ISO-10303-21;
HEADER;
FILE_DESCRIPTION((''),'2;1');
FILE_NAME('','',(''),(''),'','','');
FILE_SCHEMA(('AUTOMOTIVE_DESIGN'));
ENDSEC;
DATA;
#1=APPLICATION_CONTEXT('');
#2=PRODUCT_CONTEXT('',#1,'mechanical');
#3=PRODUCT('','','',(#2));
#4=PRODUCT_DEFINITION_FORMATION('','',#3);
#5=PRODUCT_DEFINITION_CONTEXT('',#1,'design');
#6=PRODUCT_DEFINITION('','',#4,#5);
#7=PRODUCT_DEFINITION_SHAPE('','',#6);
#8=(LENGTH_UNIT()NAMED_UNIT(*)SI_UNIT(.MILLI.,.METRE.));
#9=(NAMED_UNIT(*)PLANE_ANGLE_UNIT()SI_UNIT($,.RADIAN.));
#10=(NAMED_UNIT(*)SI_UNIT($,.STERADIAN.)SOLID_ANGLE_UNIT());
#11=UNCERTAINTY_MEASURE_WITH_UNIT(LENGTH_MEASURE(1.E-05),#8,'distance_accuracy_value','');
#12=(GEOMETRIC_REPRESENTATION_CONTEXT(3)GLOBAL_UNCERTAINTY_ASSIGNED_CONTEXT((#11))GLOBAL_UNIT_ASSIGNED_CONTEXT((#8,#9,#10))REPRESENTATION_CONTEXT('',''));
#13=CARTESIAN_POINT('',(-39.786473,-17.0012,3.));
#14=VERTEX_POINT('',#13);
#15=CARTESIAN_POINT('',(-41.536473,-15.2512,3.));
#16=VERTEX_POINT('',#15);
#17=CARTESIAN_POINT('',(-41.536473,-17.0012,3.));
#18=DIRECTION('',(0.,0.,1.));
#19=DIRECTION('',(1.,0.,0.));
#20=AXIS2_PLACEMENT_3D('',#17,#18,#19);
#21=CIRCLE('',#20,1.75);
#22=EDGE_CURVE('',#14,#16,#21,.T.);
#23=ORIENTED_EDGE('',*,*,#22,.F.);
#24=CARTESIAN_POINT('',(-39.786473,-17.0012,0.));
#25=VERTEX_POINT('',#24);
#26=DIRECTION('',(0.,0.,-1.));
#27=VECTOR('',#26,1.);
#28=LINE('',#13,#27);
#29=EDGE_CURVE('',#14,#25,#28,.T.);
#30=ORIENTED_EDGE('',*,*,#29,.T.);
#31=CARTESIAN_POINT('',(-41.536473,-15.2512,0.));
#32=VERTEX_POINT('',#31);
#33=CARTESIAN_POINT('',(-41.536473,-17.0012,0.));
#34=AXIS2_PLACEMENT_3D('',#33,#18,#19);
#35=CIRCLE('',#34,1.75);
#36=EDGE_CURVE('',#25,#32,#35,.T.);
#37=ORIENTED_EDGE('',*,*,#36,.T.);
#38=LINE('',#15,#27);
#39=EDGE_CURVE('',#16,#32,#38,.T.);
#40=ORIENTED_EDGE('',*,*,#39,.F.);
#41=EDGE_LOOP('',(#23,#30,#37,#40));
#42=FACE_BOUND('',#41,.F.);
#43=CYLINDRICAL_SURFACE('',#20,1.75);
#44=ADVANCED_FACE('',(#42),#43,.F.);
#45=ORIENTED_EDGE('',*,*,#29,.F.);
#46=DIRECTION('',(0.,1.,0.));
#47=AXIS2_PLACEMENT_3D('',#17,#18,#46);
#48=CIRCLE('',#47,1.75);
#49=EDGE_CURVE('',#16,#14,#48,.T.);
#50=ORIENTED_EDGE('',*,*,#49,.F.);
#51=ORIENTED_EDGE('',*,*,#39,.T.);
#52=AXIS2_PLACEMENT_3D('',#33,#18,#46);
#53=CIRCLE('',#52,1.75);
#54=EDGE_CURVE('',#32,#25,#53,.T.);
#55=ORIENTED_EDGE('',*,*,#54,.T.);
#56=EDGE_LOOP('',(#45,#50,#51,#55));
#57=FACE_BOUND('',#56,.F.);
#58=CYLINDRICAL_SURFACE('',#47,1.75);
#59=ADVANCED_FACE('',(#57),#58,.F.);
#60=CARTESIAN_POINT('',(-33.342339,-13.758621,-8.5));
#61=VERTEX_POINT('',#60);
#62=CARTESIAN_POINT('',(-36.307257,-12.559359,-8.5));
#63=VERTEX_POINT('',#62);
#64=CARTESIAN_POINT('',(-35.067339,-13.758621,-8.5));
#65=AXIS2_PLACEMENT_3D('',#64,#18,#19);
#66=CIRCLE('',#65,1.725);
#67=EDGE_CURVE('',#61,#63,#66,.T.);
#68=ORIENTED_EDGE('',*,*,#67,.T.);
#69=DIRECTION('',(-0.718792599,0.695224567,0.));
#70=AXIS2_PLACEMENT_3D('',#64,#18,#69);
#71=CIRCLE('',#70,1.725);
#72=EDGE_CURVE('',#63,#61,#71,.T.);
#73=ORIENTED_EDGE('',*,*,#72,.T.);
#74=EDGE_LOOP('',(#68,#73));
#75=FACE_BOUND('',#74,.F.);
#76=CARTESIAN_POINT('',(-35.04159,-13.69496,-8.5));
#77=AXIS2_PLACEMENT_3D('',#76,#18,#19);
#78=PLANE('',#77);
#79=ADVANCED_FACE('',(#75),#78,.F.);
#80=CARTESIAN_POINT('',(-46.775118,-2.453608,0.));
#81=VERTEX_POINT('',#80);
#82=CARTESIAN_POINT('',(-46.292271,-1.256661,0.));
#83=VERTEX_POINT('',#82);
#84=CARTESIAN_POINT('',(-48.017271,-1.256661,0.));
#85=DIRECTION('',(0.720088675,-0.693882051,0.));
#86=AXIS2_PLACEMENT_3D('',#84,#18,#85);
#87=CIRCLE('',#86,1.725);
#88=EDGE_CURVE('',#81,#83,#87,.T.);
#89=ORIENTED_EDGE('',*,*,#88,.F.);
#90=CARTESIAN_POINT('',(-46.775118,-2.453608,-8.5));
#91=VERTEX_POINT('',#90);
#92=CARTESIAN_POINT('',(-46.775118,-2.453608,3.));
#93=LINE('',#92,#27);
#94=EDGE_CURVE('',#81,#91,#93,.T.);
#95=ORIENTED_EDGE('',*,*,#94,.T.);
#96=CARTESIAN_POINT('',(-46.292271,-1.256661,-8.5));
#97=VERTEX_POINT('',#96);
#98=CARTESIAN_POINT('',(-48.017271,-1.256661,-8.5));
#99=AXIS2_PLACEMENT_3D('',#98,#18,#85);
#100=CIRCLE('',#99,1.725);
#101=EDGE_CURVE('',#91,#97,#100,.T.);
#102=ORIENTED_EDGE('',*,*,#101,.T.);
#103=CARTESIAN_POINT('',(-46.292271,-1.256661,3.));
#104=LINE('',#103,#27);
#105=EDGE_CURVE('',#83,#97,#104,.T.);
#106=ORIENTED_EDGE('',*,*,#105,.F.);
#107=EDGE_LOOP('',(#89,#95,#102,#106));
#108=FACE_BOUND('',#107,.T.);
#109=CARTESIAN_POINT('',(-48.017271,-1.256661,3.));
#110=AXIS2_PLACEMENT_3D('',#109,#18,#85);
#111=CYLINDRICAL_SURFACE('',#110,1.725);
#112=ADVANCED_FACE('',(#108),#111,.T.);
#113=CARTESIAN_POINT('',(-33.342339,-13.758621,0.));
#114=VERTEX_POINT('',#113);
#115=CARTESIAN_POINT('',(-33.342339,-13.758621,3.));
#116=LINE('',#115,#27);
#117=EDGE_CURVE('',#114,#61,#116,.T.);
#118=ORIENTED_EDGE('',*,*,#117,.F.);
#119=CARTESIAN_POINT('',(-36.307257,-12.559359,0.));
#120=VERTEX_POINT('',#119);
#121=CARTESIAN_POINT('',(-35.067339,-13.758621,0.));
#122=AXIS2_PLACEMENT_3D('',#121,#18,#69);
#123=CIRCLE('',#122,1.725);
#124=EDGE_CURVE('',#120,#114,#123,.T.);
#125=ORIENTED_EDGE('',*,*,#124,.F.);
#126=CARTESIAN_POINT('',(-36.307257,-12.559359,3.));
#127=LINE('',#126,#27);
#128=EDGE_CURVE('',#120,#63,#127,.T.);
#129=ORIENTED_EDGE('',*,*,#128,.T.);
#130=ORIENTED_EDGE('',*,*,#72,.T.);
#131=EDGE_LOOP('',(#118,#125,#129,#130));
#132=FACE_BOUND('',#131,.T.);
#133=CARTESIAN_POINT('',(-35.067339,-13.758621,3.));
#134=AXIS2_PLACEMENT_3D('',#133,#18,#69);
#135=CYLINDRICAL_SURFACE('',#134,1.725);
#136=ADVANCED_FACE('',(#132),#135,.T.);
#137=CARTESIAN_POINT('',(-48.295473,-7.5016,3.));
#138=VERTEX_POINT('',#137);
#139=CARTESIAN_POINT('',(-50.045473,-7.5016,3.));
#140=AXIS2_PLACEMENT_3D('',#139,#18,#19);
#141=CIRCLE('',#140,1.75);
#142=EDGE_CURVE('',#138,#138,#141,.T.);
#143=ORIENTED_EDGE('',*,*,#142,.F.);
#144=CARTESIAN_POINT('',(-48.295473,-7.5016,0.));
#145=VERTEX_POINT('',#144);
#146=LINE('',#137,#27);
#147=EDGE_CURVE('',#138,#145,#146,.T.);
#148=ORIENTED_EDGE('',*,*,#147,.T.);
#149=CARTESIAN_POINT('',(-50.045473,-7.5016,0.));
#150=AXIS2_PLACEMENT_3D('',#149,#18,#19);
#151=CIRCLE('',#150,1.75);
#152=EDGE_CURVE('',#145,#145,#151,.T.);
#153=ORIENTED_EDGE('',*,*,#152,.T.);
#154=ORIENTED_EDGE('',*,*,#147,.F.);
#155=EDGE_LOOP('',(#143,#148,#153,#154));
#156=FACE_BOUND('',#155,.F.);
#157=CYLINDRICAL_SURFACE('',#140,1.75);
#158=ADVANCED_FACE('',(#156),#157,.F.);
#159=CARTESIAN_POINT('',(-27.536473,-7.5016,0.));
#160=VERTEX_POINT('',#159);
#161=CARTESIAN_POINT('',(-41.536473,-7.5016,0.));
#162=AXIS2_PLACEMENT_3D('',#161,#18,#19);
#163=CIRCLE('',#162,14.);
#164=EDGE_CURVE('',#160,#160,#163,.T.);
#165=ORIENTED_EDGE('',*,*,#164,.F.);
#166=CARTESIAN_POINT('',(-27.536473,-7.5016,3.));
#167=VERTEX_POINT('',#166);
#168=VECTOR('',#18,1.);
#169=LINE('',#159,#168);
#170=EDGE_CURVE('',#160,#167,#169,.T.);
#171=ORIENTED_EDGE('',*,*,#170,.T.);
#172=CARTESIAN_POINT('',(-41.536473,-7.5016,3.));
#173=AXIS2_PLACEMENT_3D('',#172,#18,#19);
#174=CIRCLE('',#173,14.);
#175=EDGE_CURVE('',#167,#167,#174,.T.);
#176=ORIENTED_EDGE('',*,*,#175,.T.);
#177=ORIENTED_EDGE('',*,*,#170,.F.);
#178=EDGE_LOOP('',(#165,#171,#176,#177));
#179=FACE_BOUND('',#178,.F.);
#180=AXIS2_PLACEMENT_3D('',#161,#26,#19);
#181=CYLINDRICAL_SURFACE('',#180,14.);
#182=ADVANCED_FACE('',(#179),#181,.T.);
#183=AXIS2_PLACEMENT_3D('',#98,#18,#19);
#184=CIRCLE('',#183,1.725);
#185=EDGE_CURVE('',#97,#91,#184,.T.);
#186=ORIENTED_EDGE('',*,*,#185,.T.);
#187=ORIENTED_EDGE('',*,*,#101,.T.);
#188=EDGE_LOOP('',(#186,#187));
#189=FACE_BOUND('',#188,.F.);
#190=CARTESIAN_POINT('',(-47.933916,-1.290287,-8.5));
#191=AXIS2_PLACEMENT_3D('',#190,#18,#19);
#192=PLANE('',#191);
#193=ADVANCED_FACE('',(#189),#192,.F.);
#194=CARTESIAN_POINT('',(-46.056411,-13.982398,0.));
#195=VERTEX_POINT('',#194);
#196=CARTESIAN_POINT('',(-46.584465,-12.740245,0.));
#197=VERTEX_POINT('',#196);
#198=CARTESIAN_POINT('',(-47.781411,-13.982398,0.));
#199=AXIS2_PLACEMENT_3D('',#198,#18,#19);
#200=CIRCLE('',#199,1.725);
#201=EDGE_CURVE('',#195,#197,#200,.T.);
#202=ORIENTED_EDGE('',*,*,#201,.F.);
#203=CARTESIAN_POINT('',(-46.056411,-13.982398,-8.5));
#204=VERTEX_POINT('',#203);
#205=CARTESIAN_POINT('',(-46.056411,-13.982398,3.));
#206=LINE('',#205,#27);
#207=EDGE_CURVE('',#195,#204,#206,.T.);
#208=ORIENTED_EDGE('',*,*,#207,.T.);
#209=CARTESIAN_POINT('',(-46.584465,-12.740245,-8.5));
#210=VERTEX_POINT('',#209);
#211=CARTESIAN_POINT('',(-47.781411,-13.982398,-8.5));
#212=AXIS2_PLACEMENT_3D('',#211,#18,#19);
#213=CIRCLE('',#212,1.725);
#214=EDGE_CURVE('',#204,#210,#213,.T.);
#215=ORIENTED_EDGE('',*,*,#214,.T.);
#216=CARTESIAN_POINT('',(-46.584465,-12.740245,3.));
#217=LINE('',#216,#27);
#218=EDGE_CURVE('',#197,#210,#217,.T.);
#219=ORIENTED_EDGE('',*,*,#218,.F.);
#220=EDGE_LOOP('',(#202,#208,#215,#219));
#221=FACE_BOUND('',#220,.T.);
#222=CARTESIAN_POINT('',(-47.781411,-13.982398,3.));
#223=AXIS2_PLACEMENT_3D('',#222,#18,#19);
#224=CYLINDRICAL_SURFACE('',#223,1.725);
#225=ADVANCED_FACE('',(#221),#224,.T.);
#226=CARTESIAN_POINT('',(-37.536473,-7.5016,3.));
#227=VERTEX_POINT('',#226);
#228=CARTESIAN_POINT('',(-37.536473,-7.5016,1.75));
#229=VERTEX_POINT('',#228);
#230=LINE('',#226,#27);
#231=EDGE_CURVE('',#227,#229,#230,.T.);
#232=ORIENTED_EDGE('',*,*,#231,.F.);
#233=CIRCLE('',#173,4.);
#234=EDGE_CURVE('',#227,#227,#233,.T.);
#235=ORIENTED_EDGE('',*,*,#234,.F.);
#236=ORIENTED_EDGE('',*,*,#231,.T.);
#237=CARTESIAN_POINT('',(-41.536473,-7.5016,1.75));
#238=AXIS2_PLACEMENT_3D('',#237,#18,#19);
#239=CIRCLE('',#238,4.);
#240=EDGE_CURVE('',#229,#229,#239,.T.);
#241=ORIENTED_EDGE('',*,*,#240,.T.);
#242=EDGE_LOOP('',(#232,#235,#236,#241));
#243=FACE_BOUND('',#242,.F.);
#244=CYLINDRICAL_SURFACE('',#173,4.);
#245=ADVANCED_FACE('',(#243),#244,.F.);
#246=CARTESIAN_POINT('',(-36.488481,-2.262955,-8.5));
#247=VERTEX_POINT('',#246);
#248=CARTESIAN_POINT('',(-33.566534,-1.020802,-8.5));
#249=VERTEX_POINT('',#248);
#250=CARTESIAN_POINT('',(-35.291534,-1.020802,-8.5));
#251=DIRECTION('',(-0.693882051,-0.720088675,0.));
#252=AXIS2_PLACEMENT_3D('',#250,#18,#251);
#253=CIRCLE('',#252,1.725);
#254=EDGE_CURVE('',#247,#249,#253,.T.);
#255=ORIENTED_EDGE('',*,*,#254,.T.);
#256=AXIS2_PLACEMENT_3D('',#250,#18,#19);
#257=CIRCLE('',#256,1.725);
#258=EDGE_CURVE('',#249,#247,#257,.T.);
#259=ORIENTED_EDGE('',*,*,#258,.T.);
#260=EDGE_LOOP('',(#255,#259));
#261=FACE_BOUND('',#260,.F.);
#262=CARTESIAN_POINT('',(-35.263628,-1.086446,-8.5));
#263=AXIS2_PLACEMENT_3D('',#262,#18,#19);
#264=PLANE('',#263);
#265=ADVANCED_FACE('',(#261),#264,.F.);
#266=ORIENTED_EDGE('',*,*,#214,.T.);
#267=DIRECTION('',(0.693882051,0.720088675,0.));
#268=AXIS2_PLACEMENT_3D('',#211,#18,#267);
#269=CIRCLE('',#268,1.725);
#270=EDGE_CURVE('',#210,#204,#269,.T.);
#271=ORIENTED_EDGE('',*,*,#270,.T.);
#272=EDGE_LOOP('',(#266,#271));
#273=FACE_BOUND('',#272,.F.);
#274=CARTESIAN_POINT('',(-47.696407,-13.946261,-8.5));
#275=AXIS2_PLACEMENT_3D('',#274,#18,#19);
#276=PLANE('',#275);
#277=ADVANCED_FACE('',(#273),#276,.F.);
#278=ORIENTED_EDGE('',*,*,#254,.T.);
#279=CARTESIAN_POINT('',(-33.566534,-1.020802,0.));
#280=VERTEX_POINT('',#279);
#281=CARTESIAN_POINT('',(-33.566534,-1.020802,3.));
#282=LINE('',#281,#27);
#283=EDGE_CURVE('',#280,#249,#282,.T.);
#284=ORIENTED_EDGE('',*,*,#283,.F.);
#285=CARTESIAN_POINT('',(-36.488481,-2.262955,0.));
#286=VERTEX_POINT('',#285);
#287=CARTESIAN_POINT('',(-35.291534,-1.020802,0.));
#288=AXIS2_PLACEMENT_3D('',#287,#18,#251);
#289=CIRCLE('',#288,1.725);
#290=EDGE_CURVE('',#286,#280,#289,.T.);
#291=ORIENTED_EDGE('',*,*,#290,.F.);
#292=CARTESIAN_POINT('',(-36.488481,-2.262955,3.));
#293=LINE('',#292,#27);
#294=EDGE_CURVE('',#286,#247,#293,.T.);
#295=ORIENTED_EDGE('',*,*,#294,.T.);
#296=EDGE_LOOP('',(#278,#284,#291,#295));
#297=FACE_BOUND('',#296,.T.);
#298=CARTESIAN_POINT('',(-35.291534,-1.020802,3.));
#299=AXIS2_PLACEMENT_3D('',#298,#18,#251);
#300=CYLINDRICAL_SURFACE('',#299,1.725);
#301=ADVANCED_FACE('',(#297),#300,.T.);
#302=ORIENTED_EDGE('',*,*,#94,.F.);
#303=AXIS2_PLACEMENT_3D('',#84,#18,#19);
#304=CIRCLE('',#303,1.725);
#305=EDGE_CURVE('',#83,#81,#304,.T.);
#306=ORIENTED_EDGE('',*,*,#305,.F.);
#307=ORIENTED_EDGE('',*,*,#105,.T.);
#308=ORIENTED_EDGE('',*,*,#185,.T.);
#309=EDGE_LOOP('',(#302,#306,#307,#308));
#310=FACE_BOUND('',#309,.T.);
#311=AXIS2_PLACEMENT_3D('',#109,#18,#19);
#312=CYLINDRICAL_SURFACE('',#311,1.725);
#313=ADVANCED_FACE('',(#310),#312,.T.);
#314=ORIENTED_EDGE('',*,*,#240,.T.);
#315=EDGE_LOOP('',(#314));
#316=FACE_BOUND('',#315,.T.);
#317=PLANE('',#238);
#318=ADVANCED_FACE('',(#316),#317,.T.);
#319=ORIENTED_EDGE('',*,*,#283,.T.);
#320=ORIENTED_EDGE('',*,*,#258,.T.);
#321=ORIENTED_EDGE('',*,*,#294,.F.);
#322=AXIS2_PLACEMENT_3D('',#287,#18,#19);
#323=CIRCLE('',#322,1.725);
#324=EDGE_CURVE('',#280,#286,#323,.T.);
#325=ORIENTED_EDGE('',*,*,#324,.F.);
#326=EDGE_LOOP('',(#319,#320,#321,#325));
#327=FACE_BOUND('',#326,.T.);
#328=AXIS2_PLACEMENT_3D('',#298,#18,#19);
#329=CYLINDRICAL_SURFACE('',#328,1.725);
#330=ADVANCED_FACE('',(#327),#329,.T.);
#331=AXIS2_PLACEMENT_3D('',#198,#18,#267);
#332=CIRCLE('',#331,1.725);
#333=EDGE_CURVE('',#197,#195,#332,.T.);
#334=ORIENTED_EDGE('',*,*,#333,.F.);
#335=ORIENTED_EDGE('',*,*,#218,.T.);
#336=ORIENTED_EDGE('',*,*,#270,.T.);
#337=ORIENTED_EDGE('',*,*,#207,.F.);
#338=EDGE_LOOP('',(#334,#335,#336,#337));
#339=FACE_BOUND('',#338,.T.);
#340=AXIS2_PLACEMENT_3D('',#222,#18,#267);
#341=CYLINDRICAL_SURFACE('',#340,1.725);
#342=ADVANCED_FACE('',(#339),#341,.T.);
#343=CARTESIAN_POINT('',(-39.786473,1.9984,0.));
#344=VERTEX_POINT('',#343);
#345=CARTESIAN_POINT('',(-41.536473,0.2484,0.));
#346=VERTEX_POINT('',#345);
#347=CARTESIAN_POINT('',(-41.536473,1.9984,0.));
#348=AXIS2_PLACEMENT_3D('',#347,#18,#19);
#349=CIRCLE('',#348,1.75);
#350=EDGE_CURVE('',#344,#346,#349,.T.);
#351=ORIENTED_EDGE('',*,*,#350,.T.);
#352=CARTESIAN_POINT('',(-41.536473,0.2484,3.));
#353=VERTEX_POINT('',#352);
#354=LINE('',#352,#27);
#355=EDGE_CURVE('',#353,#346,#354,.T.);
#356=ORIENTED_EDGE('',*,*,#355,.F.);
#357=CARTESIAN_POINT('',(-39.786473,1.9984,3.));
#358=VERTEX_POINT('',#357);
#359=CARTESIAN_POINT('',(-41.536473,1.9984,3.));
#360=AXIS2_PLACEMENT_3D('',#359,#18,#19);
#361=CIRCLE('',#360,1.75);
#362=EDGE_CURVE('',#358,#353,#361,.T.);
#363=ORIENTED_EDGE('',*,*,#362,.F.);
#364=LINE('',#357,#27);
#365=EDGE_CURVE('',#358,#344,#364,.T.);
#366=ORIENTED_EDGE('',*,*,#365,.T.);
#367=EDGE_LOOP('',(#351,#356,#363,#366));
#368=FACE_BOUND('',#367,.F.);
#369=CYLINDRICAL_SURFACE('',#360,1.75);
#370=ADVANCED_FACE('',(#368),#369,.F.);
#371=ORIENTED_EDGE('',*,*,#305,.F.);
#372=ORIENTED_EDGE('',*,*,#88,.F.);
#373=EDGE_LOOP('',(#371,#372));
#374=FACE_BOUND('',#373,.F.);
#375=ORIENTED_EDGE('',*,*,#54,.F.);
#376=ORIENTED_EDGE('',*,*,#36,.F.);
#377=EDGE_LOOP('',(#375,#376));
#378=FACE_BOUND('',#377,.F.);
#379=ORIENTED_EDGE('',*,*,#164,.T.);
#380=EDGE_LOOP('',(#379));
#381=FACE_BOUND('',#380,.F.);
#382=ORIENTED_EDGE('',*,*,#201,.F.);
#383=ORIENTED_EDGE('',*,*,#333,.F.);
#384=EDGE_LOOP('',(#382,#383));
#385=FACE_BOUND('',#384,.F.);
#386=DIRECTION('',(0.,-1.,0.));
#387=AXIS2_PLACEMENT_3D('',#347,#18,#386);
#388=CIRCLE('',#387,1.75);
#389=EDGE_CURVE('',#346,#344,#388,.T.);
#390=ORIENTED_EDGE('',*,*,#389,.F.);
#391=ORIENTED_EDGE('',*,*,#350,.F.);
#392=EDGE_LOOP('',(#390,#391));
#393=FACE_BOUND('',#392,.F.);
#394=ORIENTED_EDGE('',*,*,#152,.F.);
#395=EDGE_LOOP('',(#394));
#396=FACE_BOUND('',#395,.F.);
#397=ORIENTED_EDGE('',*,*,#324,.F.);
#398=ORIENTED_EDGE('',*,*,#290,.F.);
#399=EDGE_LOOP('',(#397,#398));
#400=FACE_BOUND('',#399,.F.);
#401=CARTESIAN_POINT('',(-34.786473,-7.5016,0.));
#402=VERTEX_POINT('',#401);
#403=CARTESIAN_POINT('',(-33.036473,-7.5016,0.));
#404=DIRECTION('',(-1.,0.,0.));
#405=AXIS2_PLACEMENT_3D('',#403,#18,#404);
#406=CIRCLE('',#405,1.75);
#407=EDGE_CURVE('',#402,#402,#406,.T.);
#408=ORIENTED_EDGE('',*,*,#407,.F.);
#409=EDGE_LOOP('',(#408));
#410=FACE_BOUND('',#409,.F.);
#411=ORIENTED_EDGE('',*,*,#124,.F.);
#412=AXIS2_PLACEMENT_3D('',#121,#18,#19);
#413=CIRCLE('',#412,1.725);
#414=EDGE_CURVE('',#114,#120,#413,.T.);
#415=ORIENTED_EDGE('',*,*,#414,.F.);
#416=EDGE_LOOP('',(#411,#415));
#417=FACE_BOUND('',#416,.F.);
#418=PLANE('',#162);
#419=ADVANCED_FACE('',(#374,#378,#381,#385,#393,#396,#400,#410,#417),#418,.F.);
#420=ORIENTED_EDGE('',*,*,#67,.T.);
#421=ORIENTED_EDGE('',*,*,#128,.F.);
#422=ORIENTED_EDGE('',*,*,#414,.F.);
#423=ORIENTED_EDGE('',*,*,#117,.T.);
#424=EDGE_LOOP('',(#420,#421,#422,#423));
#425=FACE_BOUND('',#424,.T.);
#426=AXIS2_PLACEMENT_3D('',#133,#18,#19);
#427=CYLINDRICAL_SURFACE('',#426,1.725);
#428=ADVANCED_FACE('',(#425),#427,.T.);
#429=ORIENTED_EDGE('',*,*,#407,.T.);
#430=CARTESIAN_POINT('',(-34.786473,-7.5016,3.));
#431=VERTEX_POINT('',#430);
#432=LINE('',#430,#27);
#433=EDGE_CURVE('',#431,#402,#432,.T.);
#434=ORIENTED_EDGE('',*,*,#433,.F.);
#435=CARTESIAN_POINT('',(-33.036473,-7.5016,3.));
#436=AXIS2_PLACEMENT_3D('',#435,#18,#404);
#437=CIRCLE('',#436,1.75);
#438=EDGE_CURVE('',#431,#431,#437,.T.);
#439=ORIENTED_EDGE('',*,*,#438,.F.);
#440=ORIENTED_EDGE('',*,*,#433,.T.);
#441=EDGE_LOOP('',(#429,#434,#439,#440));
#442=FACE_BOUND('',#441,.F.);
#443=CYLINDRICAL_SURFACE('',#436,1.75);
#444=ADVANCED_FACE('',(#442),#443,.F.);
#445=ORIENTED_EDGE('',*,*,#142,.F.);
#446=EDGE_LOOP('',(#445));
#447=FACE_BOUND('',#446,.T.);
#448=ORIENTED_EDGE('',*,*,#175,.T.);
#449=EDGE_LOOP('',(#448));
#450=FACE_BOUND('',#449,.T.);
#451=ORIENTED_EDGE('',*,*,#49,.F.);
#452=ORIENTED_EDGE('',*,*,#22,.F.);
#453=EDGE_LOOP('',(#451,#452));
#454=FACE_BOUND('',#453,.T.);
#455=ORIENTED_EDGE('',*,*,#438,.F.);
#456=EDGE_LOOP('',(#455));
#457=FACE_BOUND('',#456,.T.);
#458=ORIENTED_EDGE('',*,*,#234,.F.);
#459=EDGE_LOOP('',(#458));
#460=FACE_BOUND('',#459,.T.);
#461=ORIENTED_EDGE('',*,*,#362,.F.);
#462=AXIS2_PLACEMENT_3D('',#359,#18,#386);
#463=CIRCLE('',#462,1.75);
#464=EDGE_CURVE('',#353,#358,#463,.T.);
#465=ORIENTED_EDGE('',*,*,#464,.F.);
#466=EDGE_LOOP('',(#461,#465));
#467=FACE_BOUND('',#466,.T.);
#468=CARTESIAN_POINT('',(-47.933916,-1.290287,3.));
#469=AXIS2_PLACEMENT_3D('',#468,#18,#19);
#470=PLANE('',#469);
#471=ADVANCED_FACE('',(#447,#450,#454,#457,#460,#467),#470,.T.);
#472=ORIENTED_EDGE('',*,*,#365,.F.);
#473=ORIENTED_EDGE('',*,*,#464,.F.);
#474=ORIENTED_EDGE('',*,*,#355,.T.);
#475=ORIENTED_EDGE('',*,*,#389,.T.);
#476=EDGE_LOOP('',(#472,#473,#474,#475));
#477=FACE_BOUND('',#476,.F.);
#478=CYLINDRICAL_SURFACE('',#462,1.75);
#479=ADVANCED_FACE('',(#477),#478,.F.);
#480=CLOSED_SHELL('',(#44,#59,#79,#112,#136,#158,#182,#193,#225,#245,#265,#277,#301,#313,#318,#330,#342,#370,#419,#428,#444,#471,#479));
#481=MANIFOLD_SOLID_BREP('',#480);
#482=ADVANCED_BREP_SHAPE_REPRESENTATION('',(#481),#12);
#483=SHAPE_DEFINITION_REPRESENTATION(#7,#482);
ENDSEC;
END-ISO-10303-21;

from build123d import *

# Parameters (mm, degrees)
F0_R     = 14
F1_DEPTH = 3
F2_R     = 4
F3_DEPTH = 1.25
F5_DEPTH = 11.5
F6_DEPTH = 25.4
F4_R     = 1.75
F7_DEPTH = 25.4


# Not quite as in the source:
# - a feature names something its author has since deleted; it is built from what else it names


with BuildPart() as f1:
    # F0 (on Top) → F1 (new body)
    with BuildSketch(Plane.XY):
        with Locations((-41.5364727378, -7.5015998445)):
            Circle(F0_R)
    extrude(amount=F1_DEPTH)

    # F2 (on face) → F3 (cut)
    with BuildSketch(Plane.XY.offset(3)):
        with Locations((-41.5364727378, -7.5015998445)):
            Circle(F2_R)
    extrude(amount=-F3_DEPTH, mode=Mode.SUBTRACT)

    # F4 (on face) → F5 (join)
    with BuildSketch(Plane.XY.offset(3)):
        with BuildLine():
            ThreePointArc((-46.2922708097, -1.256661386), (-49.6170112359, -0.6113276981), (-46.7751178459, -2.4536079239))
            ThreePointArc((-46.7751178459, -2.4536079239), (-46.4175303835, -1.9019950739), (-46.2922708097, -1.256661386))
        make_face()
        with BuildLine():
            ThreePointArc((-33.3423393435, -13.758620951), (-34.4205133346, -12.1594833352), (-36.3072565774, -12.5593585722))
            ThreePointArc((-36.3072565774, -12.5593585722), (-35.7141653523, -15.3577585668), (-33.3423393435, -13.758620951))
        make_face()
        with BuildLine():
            ThreePointArc((-46.0564111963, -13.9823979165), (-46.193904066, -13.3075304398), (-46.5844646585, -12.7402449527))
            ThreePointArc((-46.5844646585, -12.7402449527), (-49.3689183267, -14.6572653931), (-46.0564111963, -13.9823979165))
        make_face()
        with BuildLine():
            ThreePointArc((-33.5665342792, -1.0208017726), (-35.9664017559, 0.5667053577), (-36.4884808171, -2.2629547364))
            ThreePointArc((-36.4884808171, -2.2629547364), (-34.6166668026, -2.608308903), (-33.5665342792, -1.0208017726))
        make_face()
    extrude(amount=-F5_DEPTH)

    # F4 (on face) → F6 (cut)
    with BuildSketch(Plane.XY.offset(3)):
        with BuildLine():
            ThreePointArc((-39.7864727378, 1.9984001555), (-42.7739096049, 3.2358370225), (-41.5364727378, 0.2484001555))
            ThreePointArc((-41.5364727378, 0.2484001555), (-40.2990358707, 0.7609632884), (-39.7864727378, 1.9984001555))
        make_face()
        with BuildLine():
            ThreePointArc((-31.2864727378, -7.5015998445), (-33.0364727378, -5.7515998445), (-34.7864727378, -7.5015998445))
            ThreePointArc((-34.7864727378, -7.5015998445), (-33.0364727378, -9.2515998445), (-31.2864727378, -7.5015998445))
        make_face()
        with BuildLine():
            ThreePointArc((-39.7864727378, -17.0011998445), (-40.2990358707, -15.7637629775), (-41.5364727378, -15.2511998445))
            ThreePointArc((-41.5364727378, -15.2511998445), (-42.7739096049, -18.2386367116), (-39.7864727378, -17.0011998445))
        make_face()
    extrude(amount=-F6_DEPTH, mode=Mode.SUBTRACT)

    # F4 (on face) → F7 (cut)
    with BuildSketch(Plane.XY.offset(3)):
        with Locations((-50.0454727378, -7.5015998445)):
            Circle(F4_R)
    extrude(amount=-F7_DEPTH, mode=Mode.SUBTRACT)


solid = f1.part
